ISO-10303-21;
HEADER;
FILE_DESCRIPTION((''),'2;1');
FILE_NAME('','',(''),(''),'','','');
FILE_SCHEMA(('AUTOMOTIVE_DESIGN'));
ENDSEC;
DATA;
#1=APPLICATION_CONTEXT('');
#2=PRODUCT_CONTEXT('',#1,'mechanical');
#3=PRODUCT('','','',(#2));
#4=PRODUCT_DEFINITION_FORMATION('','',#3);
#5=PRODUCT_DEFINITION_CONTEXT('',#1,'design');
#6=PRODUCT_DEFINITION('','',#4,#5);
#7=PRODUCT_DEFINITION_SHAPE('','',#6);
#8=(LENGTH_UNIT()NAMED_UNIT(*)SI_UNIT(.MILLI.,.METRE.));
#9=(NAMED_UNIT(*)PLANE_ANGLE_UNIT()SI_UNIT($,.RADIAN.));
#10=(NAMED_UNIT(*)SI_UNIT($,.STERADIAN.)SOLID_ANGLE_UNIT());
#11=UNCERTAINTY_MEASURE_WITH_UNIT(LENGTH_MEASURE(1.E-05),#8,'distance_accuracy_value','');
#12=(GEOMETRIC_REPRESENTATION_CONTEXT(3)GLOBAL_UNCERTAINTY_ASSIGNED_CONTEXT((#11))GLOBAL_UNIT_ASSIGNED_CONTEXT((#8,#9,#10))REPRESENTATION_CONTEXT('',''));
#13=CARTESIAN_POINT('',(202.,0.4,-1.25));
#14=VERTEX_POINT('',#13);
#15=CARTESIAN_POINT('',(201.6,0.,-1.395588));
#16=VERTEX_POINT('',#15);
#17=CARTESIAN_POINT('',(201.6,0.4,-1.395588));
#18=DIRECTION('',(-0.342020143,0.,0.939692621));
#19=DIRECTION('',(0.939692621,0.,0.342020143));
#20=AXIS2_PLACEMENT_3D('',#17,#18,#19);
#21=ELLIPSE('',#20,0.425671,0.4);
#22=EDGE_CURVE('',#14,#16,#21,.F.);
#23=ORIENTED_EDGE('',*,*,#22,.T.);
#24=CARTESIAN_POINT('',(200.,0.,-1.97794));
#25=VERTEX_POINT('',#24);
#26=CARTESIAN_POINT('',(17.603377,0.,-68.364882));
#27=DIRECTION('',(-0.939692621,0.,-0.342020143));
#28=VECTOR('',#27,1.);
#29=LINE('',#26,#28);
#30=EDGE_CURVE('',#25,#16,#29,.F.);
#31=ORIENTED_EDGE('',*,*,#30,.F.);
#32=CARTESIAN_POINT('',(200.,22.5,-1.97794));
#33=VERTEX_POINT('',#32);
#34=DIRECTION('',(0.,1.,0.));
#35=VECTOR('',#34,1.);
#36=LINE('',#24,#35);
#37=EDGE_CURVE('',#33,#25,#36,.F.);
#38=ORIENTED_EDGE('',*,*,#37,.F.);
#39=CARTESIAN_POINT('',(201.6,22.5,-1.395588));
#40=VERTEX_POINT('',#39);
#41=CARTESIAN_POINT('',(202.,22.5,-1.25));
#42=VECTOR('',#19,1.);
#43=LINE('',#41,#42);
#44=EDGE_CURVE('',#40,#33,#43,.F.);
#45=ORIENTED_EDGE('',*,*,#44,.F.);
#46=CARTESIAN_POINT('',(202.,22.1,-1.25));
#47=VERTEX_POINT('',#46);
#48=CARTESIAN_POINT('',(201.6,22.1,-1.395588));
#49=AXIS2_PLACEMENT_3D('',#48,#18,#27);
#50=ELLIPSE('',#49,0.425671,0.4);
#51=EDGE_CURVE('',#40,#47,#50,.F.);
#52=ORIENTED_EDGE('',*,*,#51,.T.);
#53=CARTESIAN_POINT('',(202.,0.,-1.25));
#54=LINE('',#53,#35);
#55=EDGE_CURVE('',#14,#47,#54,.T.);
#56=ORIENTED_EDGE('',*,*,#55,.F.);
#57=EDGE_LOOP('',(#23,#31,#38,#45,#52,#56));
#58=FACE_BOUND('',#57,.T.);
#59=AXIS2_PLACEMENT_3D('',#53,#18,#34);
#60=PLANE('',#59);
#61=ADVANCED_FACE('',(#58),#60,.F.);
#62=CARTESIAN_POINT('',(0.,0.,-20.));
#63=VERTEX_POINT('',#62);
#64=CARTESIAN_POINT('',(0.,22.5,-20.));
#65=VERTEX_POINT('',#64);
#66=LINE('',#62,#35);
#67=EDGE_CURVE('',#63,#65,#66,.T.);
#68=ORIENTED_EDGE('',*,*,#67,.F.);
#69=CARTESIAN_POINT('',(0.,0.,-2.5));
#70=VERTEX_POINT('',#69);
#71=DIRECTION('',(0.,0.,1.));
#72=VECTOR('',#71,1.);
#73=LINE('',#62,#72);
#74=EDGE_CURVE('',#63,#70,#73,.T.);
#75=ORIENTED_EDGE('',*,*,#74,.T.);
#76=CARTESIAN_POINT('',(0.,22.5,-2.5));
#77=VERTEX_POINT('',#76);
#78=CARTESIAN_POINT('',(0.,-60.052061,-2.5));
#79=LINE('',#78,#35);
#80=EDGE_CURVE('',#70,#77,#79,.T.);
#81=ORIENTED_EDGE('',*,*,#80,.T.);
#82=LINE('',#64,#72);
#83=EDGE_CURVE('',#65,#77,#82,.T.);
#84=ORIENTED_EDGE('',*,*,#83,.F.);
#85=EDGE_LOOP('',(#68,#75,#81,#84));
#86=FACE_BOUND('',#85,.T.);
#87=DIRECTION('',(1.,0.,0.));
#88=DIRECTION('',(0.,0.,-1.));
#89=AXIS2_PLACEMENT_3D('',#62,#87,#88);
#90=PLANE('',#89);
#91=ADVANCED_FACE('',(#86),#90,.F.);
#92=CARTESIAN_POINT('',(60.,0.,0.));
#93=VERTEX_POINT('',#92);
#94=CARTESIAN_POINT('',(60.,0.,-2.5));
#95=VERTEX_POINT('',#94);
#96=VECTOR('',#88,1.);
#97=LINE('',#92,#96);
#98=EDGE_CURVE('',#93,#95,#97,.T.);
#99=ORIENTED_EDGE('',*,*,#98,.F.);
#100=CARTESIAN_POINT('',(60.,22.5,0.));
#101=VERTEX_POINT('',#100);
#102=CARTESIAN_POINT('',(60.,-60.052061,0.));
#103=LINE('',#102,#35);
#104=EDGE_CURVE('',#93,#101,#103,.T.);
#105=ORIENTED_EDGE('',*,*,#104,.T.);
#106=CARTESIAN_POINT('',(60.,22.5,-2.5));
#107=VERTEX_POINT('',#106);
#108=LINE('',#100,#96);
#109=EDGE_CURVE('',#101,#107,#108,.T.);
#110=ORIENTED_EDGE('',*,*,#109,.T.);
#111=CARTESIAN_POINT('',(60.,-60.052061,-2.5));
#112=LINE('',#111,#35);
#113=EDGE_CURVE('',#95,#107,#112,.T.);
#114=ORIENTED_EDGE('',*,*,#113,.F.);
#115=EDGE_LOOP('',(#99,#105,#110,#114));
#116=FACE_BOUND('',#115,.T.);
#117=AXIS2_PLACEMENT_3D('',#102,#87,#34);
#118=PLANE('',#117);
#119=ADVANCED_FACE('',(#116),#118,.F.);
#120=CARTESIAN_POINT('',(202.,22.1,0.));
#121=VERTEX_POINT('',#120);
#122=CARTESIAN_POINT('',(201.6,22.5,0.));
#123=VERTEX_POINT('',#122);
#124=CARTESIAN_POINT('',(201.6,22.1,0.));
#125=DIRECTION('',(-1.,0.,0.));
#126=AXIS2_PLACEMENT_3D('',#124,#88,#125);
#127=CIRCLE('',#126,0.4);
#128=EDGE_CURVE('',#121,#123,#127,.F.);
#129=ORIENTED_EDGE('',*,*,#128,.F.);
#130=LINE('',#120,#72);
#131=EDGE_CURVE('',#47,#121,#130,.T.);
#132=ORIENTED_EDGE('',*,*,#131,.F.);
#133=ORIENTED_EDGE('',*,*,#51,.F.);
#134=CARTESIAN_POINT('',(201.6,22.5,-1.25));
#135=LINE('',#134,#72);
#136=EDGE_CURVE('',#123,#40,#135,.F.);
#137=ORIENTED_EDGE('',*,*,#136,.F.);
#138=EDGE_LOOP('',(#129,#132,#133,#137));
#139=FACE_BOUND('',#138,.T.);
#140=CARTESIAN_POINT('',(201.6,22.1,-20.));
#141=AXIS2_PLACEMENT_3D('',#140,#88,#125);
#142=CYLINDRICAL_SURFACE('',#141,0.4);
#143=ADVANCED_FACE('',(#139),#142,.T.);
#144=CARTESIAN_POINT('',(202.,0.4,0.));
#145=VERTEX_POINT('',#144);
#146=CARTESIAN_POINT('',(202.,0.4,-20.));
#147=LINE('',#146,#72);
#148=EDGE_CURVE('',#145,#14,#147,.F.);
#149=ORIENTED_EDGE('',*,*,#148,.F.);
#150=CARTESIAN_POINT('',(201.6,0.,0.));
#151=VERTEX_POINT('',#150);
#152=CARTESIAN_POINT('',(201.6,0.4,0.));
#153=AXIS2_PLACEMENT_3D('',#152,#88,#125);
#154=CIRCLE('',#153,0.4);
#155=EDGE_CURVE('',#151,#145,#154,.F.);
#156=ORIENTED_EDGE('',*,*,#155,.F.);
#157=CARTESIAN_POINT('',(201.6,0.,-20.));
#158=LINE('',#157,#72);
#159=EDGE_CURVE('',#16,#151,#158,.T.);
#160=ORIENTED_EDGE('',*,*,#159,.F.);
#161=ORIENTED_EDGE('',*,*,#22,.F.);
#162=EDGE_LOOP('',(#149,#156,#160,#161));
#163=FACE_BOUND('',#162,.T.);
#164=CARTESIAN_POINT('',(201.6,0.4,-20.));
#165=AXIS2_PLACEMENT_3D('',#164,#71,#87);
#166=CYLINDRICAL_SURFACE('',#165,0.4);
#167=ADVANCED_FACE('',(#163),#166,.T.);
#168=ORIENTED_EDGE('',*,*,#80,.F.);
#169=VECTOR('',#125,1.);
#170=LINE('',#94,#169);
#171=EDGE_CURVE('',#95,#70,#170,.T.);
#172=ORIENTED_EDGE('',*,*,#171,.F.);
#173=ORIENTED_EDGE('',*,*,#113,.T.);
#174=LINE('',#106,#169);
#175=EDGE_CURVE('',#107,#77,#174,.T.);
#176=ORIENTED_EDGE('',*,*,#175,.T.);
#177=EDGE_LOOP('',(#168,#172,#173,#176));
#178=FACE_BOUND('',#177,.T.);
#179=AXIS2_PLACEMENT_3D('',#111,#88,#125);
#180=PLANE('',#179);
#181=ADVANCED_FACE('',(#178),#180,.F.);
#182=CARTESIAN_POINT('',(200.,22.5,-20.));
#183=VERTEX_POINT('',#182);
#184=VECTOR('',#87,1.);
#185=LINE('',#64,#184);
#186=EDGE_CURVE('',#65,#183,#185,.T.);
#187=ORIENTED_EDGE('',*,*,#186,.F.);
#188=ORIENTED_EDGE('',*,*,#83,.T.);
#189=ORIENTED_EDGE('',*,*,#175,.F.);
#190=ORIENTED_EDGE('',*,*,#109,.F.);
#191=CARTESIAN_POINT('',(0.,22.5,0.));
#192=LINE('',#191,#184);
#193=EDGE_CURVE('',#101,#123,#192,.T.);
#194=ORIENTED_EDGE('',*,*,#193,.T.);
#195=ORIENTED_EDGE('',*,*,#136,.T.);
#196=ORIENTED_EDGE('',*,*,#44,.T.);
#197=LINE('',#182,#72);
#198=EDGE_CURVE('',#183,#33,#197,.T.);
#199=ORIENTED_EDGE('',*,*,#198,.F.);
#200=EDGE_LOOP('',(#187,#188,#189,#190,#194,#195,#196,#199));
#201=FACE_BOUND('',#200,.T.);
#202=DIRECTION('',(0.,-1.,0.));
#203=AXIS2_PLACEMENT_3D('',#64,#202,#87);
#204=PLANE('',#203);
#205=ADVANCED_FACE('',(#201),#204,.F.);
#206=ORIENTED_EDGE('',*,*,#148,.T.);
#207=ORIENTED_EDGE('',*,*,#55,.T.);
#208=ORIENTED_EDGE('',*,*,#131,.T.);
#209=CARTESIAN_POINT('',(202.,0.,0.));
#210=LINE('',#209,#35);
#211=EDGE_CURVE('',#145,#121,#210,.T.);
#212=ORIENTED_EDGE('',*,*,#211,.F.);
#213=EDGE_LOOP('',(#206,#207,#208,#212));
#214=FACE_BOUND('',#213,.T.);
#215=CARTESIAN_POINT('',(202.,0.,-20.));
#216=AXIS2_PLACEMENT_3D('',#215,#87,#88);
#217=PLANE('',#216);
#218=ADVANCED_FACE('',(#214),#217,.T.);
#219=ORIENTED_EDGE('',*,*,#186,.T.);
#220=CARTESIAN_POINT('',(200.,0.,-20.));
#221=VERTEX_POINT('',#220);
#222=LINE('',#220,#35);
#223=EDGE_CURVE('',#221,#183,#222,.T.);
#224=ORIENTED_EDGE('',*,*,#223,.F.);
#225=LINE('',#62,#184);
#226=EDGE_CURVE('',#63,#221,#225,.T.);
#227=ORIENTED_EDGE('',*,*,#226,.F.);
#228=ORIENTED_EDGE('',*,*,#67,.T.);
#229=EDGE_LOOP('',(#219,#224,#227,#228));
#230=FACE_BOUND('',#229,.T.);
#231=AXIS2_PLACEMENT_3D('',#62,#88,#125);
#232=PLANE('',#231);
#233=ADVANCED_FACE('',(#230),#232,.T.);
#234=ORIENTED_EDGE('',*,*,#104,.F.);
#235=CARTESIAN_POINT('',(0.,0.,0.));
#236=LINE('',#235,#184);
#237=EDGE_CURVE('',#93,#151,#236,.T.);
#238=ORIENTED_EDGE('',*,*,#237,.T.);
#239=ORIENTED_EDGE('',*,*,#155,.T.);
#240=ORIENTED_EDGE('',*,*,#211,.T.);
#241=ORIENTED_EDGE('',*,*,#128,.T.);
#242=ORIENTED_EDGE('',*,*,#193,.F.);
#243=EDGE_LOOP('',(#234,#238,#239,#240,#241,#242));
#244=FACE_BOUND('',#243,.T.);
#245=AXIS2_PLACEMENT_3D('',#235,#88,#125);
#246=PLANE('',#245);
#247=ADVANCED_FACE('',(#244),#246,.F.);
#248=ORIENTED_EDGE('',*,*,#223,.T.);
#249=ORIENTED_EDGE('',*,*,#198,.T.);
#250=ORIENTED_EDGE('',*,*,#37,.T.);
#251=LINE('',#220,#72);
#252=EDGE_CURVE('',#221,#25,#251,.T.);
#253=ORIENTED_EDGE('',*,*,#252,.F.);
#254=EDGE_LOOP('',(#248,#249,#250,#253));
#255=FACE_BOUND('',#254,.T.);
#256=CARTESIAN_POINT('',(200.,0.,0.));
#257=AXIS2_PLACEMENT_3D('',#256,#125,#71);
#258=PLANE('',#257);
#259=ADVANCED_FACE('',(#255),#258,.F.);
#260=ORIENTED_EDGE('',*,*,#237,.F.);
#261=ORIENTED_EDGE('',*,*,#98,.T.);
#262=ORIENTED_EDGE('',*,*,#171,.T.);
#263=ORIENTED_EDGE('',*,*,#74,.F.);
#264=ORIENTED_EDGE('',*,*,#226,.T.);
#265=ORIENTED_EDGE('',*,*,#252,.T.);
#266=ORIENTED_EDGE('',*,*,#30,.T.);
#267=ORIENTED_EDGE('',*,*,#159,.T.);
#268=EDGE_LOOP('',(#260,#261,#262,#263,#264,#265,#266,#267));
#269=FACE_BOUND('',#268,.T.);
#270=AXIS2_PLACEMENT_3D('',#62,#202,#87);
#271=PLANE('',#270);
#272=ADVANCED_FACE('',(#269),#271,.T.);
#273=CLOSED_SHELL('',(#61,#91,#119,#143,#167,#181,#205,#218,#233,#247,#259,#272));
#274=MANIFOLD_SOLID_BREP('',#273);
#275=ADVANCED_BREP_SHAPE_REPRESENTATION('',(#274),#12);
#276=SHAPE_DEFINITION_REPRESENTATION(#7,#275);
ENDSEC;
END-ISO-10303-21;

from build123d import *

# Parameters (mm, degrees)
SKETCH1_W           = 22.5
SKETCH1_H           = 202
BOSS_EXTRUDE1_DEPTH = 20
SKETCH2_W           = 22.5
SKETCH2_H           = 18
CUT_EXTRUDE1_DEPTH  = 2
CHAMFER5_SIZE       = 2.060608065
CHAMFER5_SIZE_2     = 0.75
FILLET5_R           = 0.4
SKETCH3_W           = 60
SKETCH3_H           = 2.5
CUT_EXTRUDE2_DEPTH  = 22.5


with BuildPart() as part:
    # Sketch1 → Boss-Extrude1 (new body)
    with BuildSketch(Plane(origin=(0, 0, 0), x_dir=(0, 1, 0), z_dir=(0, 0, 1))):
        with Locations((11.25, -101)):
            Rectangle(SKETCH1_W, SKETCH1_H)
    extrude(amount=-BOSS_EXTRUDE1_DEPTH)

    # Sketch2 → Cut-Extrude1 (cut)
    with BuildSketch(Plane.YZ.offset(202)):
        with Locations((11.25, -11)):
            Rectangle(SKETCH2_W, SKETCH2_H)
    extrude(amount=-CUT_EXTRUDE1_DEPTH, mode=Mode.SUBTRACT)

    # Chamfer5
    # the kernel refuses this chamfer: 2.060608065, 0.75 mm, written as the material it takes off along each edge
    with BuildSketch(Plane(origin=(202, 27.845618587, -2), x_dir=(-0.9999130865277316, 0, -0.013184058198645886), z_dir=(0, -1, 0))) as chamfer5_piece_1_section:
        Polygon((CHAMFER5_SIZE * 0.999913086329, -CHAMFER5_SIZE * 0.013184058196), (-CHAMFER5_SIZE_2 * 0.0131840581986, -CHAMFER5_SIZE_2 * 0.999913086528), (0, 0), align=None)
    chamfer5_piece_1 = extrude(amount=33.191237174, mode=Mode.PRIVATE)
    chamfer5_piece_1 = split(chamfer5_piece_1, bisect_by=Plane(origin=(200, 11.25, -1.766801206), z_dir=(1, 0, 0)), keep=Keep.TOP, mode=Mode.PRIVATE)
    add(chamfer5_piece_1, mode=Mode.SUBTRACT)

    # Fillet5
    fillet5_edges = [part.edges().sort_by_distance(p)[0] for p in [
        (202, 0, -0.625),
        (202, 22.5, -0.625),
    ]]
    fillet(fillet5_edges, radius=FILLET5_R)

    # Sketch3 → Cut-Extrude2 (cut)
    with BuildSketch(Plane(origin=(0, 22.5, 0), x_dir=(-1, 0, 0), z_dir=(0, 1, 0))):
        with Locations((-30, -1.25)):
            Rectangle(SKETCH3_W, SKETCH3_H)
    extrude(amount=-CUT_EXTRUDE2_DEPTH, mode=Mode.SUBTRACT)


solid = part.part
